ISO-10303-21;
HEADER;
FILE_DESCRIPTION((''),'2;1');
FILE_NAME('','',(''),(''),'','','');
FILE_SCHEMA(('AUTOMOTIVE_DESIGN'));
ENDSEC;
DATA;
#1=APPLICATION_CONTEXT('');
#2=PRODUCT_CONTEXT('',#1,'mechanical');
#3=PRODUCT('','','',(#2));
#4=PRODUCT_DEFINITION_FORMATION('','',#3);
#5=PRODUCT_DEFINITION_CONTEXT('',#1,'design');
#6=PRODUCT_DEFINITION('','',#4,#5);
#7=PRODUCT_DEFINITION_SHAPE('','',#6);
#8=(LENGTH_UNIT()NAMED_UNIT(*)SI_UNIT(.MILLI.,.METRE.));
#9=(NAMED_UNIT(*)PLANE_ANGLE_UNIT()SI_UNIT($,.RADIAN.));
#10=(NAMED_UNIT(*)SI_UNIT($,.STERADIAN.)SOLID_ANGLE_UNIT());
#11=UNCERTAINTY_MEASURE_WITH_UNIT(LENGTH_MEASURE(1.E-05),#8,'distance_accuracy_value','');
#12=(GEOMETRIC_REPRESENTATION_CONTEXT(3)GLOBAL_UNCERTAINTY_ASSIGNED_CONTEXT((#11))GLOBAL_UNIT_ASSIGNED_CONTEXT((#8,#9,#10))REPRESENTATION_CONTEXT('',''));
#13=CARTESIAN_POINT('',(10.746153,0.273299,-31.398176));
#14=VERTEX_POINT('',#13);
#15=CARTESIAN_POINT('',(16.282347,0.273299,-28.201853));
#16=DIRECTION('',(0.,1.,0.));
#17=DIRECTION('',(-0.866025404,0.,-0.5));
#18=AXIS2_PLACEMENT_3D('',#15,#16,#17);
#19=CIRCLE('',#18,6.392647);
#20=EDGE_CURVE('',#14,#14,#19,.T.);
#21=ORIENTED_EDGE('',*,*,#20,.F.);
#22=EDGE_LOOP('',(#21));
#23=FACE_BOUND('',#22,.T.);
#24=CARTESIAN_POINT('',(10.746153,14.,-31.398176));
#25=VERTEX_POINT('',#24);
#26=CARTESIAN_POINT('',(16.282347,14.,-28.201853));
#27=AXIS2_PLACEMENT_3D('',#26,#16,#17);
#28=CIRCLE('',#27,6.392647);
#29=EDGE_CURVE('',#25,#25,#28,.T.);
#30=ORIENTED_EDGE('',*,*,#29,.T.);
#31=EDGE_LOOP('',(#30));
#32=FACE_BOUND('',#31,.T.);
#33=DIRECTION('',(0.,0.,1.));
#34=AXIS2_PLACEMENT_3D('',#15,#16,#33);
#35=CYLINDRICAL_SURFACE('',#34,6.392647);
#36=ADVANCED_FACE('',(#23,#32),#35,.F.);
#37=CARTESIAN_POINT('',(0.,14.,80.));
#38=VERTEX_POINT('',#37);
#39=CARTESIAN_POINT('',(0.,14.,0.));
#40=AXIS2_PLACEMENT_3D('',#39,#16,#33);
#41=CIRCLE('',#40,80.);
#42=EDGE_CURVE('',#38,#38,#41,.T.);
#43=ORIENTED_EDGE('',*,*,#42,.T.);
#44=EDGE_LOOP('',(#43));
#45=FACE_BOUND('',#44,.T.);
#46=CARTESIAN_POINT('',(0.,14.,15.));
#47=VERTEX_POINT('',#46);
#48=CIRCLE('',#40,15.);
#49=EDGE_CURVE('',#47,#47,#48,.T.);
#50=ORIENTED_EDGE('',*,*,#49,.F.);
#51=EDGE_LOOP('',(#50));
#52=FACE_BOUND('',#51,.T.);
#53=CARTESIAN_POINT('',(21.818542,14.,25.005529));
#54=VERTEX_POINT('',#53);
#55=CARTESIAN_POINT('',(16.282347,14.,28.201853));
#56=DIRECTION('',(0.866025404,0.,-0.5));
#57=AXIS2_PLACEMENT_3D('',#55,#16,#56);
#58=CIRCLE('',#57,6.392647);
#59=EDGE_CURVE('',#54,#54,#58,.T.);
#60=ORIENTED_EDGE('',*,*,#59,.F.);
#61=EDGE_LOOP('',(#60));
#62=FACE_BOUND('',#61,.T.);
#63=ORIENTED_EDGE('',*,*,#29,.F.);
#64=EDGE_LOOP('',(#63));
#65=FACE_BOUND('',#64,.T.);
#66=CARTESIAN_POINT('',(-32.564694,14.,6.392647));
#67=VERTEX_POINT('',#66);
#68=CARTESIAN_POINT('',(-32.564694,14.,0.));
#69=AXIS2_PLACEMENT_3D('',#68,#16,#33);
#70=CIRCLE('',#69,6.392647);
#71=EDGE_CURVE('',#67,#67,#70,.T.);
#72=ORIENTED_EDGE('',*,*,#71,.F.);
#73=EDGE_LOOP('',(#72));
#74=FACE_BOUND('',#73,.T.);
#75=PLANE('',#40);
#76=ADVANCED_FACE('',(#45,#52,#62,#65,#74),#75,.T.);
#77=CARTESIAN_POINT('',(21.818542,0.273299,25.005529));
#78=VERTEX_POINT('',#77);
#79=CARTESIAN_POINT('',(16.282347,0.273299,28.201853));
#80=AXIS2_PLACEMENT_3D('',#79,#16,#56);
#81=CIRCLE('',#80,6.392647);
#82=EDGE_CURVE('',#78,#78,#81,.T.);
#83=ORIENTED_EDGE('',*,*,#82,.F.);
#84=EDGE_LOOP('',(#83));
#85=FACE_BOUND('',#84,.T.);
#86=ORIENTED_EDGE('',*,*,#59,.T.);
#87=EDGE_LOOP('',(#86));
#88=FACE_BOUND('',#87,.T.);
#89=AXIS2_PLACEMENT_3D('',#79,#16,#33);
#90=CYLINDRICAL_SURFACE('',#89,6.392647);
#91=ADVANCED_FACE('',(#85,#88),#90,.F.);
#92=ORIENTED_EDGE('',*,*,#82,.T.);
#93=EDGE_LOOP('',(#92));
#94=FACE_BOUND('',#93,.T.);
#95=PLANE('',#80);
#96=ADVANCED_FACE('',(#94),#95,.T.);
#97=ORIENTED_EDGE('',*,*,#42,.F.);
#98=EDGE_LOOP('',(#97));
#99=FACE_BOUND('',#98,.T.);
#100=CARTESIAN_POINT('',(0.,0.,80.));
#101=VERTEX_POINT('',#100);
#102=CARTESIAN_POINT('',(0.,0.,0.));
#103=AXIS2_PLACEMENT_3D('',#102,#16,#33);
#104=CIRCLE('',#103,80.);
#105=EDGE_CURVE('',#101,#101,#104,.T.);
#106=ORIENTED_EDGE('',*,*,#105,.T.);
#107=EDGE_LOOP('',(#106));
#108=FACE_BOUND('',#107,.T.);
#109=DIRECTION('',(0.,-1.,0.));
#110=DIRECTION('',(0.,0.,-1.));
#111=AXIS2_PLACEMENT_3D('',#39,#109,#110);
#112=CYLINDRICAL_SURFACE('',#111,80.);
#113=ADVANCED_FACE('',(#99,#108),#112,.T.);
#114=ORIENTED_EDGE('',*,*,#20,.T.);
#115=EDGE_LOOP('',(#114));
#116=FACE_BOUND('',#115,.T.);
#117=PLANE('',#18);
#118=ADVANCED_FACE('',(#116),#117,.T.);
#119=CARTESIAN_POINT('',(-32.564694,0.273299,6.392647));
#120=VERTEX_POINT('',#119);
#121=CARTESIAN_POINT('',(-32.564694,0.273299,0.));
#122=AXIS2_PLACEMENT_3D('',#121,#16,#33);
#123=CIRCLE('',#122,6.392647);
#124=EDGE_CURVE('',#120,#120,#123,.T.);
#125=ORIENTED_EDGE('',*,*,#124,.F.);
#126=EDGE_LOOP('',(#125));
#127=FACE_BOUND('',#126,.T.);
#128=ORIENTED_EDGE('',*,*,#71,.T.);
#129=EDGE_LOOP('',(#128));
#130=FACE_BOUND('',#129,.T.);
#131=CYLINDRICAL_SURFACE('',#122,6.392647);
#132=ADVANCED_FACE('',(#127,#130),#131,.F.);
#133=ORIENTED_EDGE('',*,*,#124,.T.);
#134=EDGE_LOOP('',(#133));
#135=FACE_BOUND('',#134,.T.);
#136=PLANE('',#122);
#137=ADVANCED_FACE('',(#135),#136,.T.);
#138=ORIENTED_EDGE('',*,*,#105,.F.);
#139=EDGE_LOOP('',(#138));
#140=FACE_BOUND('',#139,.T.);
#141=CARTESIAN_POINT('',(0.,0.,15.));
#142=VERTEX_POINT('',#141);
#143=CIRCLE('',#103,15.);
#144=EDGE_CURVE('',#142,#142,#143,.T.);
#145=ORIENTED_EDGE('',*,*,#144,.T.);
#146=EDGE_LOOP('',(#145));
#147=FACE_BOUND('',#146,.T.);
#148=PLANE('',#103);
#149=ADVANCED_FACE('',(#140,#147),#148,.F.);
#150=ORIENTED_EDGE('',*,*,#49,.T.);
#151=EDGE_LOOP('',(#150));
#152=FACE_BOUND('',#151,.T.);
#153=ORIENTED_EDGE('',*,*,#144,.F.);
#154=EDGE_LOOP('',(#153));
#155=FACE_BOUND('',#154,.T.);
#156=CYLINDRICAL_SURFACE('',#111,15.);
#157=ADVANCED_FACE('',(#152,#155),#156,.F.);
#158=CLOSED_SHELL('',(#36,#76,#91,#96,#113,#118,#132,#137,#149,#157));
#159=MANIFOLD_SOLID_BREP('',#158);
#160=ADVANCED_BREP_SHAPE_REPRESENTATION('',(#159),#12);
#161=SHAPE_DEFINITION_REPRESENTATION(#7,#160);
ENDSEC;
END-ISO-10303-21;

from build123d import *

# Parameters (mm, degrees)
SKETCH1_R           = 80
BOSS_EXTRUDE1_DEPTH = 14
SKETCH2_R           = 15
CUT_EXTRUDE1_DEPTH  = 115
SKETCH3_R           = 6.392646993
CUT_EXTRUDE2_DEPTH  = 13.72670083
CIRPATTERN1_COUNT   = 3


with BuildPart() as part:
    # Sketch1 → Boss-Extrude1 (new body)
    with BuildSketch(Plane(origin=(0, 0, 0), x_dir=(1, 0, 0), z_dir=(0, 1, 0))):
        Circle(SKETCH1_R)
    extrude(amount=BOSS_EXTRUDE1_DEPTH)

    # Sketch2 → Cut-Extrude1 (cut, through all)
    with BuildSketch(Plane(origin=(0, 0, 0), x_dir=(1, 0, 0), z_dir=(0, 1, 0))):
        Circle(SKETCH2_R)
    extrude(amount=CUT_EXTRUDE1_DEPTH, mode=Mode.SUBTRACT)

    # Sketch3 → Cut-Extrude2 (cut)
    with BuildSketch(Plane(origin=(0, 14, 0), x_dir=(1, 0, 0), z_dir=(0, 1, 0))):
        with Locations((-32.564694412, 0)):
            Circle(SKETCH3_R)
    cut_extrude2 = extrude(amount=-CUT_EXTRUDE2_DEPTH, mode=Mode.SUBTRACT)

    # CirPattern1: Cut-Extrude2 ×3 about axis
    cirpattern1_axis = Axis((0, 0, 0), (0, 1, 0))
    for i in range(1, CIRPATTERN1_COUNT):
        add(cut_extrude2.rotate(cirpattern1_axis, i * 360 / CIRPATTERN1_COUNT), mode=Mode.SUBTRACT)


solid = part.part
